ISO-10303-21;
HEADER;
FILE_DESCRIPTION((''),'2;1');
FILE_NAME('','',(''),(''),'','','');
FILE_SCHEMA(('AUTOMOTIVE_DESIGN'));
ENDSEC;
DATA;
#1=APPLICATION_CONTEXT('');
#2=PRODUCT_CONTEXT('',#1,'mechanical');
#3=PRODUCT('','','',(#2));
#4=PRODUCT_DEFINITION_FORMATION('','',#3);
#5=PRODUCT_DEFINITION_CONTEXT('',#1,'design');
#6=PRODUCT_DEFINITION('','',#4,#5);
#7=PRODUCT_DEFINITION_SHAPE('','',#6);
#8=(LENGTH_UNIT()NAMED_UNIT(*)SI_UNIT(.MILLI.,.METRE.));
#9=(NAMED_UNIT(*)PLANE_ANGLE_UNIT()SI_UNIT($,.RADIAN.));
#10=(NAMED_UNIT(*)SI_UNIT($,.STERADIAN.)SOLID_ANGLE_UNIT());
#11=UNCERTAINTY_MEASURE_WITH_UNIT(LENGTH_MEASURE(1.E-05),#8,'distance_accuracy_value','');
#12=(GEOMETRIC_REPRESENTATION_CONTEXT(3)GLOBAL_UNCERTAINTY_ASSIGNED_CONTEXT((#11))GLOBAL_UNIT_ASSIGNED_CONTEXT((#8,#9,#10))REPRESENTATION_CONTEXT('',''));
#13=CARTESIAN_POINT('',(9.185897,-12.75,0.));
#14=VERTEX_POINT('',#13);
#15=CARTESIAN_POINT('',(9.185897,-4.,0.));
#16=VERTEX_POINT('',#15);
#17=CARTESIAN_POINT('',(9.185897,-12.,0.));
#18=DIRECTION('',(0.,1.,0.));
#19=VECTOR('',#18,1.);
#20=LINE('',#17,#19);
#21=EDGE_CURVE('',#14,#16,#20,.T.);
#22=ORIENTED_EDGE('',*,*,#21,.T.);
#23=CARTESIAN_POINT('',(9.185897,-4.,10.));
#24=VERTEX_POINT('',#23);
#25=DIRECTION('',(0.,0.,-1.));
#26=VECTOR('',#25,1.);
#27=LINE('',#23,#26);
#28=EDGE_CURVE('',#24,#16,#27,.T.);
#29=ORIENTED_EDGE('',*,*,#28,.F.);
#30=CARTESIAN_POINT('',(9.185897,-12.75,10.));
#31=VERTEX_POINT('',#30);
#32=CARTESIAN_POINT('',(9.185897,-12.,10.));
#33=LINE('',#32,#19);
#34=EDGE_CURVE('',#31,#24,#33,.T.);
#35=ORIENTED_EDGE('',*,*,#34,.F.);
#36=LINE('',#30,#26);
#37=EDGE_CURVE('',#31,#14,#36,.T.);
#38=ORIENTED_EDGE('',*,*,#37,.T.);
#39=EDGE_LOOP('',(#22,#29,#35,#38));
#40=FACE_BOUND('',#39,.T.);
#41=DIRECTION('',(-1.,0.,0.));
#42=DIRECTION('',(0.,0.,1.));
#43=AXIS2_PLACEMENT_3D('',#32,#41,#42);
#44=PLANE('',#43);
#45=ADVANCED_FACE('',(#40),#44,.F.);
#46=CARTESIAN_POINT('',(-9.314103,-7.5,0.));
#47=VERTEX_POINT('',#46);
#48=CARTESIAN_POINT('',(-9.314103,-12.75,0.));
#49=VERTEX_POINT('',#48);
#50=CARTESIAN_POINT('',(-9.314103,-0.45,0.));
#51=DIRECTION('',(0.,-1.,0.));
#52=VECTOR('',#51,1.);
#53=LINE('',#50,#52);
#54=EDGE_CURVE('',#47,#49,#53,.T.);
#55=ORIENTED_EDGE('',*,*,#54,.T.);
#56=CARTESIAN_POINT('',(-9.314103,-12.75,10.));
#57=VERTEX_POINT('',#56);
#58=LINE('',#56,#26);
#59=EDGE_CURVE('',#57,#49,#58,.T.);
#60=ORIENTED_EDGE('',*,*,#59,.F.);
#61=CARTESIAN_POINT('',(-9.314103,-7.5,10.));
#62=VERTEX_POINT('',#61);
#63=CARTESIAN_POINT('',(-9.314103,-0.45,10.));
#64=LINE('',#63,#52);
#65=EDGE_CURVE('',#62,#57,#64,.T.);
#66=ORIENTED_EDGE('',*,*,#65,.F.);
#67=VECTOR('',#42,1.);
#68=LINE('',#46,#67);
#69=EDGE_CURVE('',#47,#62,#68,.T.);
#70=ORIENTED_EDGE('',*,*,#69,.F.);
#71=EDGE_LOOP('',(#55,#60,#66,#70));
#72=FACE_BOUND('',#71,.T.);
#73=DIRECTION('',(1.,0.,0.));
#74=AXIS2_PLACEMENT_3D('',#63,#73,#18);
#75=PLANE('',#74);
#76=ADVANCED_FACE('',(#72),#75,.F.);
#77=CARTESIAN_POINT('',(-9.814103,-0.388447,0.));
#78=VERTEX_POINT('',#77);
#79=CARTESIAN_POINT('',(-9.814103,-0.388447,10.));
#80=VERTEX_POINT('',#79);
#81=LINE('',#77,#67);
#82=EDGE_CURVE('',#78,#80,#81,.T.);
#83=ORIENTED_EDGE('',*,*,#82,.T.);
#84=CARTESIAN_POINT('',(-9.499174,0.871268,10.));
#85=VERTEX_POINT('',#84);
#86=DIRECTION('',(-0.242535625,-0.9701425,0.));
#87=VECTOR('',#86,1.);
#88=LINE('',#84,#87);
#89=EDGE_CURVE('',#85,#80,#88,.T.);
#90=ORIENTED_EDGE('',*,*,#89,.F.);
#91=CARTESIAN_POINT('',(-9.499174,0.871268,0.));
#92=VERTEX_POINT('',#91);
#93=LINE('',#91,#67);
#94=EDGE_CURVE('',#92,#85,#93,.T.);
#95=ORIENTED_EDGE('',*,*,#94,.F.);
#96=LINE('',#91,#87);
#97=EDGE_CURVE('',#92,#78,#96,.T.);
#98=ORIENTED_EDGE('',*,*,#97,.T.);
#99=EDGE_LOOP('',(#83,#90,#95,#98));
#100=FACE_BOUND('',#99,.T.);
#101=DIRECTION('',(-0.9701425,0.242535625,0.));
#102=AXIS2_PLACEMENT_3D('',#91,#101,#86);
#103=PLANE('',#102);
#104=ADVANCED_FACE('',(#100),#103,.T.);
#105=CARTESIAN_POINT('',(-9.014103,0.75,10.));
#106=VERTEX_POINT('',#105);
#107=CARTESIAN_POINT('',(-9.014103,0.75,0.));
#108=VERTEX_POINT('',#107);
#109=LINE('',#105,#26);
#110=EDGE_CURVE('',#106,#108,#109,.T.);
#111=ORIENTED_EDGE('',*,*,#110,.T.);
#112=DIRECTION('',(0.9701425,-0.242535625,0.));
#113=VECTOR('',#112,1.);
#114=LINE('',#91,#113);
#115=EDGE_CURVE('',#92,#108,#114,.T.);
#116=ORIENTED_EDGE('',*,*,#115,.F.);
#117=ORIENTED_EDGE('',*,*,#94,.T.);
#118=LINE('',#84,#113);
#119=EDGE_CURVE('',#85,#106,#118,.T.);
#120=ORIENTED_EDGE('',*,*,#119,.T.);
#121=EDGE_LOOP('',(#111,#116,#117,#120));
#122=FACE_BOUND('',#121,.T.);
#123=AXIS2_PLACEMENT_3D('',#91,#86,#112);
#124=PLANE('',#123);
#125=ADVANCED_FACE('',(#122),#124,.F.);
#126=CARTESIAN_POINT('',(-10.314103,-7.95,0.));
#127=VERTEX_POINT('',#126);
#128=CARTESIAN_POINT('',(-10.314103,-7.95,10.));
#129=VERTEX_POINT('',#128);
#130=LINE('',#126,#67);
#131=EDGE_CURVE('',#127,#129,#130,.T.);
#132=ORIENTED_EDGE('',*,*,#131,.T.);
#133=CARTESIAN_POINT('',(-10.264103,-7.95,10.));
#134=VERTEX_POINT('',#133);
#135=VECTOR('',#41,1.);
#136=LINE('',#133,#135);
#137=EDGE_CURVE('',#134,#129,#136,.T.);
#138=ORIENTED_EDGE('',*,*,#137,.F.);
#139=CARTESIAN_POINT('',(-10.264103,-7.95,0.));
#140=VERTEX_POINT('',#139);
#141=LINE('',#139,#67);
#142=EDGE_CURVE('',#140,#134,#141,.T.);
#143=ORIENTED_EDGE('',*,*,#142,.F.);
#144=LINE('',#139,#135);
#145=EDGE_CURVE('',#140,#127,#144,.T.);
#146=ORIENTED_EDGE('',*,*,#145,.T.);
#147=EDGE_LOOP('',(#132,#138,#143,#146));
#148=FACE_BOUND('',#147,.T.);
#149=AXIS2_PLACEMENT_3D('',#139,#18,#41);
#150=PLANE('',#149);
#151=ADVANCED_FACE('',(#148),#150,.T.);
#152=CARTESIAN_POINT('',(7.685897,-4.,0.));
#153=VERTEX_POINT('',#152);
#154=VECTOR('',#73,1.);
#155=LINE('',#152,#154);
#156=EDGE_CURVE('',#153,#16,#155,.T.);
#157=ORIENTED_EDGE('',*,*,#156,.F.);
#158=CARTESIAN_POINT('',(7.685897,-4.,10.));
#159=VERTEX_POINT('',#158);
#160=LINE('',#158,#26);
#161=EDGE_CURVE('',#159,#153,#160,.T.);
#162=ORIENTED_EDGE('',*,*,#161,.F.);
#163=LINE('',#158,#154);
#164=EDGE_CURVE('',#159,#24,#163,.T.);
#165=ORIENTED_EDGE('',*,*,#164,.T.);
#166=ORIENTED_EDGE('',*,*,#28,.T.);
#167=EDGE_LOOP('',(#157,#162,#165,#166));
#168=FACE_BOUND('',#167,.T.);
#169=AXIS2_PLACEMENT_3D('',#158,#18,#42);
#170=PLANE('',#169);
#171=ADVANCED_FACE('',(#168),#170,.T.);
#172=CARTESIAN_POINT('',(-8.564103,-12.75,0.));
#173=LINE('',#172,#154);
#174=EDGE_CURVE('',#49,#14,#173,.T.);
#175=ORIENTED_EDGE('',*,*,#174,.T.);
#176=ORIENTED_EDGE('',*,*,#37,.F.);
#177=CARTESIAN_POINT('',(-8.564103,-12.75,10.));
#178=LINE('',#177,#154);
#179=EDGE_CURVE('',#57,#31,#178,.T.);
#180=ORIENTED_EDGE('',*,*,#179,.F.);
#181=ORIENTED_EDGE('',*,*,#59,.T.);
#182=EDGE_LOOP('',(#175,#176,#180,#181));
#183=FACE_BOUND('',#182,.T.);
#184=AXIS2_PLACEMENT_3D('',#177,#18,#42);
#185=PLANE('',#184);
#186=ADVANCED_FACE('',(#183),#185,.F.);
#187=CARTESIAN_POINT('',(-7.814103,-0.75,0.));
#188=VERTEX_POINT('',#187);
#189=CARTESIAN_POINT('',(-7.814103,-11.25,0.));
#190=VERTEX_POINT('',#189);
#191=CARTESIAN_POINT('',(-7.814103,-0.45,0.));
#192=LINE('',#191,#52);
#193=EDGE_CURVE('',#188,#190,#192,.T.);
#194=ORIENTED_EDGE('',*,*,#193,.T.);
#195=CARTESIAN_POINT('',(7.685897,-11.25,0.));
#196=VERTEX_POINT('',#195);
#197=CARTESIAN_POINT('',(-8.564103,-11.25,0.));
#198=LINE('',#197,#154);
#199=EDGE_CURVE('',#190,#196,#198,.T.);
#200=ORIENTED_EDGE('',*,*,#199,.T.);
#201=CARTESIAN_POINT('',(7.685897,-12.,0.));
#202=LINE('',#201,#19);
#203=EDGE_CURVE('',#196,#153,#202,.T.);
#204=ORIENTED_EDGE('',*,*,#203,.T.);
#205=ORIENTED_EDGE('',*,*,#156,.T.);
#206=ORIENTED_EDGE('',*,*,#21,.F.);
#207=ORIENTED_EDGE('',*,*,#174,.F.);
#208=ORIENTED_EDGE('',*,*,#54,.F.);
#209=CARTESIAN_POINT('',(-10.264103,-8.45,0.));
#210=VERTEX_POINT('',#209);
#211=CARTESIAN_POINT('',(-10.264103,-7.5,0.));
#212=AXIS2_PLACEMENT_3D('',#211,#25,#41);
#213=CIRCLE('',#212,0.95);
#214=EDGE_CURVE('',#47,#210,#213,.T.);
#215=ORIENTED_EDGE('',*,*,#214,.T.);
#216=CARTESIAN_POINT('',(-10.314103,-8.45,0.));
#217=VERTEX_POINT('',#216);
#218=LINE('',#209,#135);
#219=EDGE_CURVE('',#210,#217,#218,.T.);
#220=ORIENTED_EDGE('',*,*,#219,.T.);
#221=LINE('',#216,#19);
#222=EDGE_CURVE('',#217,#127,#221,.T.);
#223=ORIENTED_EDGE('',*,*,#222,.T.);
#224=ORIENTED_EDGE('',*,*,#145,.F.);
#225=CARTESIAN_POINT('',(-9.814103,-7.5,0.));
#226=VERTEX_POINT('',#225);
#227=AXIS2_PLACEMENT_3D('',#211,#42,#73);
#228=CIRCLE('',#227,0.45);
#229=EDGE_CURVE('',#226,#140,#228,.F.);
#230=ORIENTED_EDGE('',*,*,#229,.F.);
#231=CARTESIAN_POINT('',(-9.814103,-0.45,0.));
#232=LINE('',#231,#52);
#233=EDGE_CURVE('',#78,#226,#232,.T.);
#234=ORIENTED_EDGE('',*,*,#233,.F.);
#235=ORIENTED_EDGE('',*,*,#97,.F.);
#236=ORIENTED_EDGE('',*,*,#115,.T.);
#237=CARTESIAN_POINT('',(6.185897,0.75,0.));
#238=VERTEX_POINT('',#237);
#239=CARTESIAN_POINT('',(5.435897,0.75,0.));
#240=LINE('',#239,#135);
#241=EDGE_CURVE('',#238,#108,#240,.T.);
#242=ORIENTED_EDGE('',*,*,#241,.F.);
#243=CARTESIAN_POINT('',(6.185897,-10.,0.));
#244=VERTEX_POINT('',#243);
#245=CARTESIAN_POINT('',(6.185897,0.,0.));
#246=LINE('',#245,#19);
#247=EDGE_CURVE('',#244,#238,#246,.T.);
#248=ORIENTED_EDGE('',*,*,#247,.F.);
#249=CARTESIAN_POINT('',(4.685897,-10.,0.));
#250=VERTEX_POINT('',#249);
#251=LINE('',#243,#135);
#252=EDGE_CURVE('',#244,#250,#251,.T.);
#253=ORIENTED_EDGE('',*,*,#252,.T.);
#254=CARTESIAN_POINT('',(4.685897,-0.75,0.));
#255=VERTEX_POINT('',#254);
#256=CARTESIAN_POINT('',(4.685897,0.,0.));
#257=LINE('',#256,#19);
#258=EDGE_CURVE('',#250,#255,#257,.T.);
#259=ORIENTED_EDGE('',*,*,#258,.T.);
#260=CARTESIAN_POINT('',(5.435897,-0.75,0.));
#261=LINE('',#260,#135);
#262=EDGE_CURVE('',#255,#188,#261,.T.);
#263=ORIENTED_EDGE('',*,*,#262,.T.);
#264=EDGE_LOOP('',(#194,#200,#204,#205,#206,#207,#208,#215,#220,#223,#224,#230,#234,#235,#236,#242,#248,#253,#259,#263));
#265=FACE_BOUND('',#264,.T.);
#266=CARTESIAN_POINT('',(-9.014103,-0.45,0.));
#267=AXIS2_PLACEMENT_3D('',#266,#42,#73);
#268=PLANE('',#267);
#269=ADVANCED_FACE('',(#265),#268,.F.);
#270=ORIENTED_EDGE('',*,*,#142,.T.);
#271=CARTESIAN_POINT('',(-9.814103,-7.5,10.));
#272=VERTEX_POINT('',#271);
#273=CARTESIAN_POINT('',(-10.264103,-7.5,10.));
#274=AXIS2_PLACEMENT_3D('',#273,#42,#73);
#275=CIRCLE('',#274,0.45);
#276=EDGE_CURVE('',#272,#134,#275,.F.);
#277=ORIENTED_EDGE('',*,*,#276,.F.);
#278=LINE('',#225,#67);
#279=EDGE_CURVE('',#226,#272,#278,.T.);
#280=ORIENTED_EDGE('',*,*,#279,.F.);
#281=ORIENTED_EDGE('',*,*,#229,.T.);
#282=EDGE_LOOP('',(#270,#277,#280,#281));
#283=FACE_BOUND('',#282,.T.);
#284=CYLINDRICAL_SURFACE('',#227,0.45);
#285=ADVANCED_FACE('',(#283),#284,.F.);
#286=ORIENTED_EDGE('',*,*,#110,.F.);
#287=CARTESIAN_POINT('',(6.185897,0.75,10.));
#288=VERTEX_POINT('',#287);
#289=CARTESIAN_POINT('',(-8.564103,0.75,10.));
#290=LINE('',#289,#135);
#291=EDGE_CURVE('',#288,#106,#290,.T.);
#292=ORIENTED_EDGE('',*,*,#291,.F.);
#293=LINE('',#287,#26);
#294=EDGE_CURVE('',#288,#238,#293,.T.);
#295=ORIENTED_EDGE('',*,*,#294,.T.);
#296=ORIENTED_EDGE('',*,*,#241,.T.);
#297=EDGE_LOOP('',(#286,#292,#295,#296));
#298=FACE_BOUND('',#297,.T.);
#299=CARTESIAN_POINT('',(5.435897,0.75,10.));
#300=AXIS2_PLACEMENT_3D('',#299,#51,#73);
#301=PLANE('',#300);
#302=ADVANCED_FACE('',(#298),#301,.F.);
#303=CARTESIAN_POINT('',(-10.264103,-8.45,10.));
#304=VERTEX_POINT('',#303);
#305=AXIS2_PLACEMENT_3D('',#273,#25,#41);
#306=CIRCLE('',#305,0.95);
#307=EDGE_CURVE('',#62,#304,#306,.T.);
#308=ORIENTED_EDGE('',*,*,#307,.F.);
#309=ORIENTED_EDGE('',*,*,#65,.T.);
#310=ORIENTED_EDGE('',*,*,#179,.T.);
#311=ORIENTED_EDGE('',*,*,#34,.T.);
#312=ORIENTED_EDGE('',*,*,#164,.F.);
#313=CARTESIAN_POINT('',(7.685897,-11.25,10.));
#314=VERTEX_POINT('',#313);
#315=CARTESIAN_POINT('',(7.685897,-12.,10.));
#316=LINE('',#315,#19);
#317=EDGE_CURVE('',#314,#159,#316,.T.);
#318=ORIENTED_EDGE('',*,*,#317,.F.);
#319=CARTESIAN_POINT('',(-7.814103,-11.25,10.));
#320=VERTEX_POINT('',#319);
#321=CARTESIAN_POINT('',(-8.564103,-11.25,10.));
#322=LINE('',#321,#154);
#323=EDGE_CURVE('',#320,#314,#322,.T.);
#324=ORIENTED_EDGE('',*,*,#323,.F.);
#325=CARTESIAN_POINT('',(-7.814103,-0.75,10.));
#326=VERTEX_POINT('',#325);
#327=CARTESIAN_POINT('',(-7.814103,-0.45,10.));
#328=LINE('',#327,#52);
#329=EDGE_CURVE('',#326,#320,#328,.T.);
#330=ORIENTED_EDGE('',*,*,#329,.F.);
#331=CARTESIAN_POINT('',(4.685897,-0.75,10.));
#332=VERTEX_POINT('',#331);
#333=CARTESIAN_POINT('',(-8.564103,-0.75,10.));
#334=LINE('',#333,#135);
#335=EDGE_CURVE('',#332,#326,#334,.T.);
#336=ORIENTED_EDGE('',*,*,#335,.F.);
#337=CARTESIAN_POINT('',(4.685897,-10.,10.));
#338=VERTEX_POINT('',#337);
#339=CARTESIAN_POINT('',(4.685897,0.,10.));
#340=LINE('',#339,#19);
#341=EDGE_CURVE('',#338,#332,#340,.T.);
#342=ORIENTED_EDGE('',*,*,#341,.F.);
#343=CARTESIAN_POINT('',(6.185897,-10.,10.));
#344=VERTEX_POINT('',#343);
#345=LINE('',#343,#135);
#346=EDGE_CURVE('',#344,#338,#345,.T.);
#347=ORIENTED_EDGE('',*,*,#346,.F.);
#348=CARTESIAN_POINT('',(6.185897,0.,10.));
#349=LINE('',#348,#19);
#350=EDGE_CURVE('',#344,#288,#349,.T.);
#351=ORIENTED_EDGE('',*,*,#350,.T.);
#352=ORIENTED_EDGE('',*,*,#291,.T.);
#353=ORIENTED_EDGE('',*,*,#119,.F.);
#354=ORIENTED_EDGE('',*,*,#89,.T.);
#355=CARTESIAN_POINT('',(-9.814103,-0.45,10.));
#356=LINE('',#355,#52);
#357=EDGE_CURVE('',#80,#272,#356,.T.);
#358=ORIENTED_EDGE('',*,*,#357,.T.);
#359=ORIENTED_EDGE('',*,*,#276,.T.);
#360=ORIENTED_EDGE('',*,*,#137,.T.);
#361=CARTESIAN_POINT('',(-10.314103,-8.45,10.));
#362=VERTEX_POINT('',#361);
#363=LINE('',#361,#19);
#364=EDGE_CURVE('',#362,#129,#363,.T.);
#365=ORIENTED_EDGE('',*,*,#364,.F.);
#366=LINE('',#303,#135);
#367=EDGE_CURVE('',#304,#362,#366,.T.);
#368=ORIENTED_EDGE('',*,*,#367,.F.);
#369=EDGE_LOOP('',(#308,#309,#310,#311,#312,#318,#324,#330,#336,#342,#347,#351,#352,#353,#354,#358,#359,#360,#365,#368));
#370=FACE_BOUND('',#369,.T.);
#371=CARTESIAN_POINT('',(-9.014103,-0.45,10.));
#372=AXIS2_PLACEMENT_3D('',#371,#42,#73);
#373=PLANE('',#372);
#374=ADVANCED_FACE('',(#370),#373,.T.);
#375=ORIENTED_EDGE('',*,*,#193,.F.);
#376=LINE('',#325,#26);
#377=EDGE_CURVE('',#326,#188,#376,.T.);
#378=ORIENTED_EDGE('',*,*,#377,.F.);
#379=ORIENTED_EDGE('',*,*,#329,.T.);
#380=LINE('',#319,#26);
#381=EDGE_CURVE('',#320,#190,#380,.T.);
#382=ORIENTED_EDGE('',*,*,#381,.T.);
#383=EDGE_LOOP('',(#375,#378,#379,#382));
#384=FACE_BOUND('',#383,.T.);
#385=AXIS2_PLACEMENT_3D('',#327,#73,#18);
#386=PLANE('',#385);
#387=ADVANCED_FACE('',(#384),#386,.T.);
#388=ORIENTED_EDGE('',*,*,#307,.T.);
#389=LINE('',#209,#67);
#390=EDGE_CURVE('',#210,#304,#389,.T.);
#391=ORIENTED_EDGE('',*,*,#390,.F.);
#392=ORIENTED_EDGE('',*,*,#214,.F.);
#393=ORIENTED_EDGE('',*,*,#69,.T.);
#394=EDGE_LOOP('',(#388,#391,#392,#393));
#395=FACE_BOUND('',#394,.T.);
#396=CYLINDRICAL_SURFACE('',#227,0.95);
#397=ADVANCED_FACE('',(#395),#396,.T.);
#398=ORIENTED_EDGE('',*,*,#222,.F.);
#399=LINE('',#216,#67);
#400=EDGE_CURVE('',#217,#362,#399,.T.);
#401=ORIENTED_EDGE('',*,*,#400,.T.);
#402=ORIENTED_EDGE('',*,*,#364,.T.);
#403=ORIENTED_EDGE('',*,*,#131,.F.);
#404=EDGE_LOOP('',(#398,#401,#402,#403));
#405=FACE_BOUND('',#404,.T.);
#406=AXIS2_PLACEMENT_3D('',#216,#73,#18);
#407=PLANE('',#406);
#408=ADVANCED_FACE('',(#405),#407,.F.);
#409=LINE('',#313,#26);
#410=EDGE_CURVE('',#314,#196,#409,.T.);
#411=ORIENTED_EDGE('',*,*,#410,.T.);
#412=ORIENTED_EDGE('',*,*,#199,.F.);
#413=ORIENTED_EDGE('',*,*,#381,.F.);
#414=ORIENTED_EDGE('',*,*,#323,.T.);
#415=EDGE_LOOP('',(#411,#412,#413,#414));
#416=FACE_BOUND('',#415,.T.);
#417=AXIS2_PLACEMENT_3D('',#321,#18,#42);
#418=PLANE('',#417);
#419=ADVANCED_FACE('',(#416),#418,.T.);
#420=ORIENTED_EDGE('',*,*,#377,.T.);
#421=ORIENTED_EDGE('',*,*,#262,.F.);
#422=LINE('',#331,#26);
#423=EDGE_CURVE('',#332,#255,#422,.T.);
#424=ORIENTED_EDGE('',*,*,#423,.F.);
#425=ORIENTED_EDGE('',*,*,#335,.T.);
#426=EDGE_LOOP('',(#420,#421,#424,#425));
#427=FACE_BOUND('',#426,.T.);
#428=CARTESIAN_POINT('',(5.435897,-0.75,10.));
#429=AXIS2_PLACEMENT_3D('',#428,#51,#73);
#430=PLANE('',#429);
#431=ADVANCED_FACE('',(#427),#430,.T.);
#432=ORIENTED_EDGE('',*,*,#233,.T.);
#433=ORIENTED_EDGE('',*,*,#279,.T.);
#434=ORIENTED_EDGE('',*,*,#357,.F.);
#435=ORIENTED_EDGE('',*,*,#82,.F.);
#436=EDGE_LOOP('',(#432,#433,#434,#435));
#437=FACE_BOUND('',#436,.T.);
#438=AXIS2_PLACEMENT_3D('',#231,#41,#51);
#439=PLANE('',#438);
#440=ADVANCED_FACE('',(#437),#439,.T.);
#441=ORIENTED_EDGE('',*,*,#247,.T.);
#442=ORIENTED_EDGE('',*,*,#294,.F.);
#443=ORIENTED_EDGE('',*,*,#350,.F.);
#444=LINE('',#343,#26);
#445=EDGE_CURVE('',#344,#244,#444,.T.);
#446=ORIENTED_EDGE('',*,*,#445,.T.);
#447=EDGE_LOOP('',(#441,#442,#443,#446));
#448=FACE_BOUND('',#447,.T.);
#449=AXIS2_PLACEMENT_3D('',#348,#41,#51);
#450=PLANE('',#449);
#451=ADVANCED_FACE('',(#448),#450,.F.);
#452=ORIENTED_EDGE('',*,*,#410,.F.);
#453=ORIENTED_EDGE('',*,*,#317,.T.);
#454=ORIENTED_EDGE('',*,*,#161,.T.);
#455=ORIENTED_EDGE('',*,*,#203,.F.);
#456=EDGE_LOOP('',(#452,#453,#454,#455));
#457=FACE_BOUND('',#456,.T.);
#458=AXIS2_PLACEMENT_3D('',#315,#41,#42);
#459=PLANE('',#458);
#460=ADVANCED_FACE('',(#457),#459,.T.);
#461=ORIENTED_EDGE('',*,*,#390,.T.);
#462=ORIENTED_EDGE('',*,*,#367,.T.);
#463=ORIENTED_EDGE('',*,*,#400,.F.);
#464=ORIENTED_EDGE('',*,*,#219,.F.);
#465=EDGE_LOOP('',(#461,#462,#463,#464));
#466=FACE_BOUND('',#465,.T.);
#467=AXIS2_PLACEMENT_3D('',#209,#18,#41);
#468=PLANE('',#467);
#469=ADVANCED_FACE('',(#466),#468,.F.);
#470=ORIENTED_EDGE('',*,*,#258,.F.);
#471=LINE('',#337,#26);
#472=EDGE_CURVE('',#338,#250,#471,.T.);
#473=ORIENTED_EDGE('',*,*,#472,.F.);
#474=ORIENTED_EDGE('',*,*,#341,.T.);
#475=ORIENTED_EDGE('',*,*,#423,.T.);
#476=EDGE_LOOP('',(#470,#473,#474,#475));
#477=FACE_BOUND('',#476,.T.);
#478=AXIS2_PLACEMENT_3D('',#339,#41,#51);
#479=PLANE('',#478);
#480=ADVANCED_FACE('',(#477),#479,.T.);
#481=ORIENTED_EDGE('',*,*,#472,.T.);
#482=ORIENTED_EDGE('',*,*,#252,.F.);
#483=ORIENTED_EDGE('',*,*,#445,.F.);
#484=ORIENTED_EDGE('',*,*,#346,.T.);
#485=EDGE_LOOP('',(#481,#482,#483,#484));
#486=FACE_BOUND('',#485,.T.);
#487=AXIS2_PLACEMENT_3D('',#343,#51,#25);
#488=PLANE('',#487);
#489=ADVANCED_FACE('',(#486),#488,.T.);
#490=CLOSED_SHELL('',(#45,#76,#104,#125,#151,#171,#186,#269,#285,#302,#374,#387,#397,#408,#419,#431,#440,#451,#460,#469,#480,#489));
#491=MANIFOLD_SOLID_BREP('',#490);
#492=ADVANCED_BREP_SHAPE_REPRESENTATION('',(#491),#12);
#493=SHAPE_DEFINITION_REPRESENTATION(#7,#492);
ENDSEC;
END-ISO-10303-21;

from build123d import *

# Parameters (mm, degrees)
EXTRUDE_THIN1_DEPTH = 10
EXTRUDE_THIN2_DEPTH = 10


# Read off the part's stored shape, not the designer's step: Extrude-Thin1
with BuildPart() as part:
    # Extrude-Thin1 outline → Extrude-Thin1 (new body)
    with BuildSketch(Plane.XY):
        Polygon((-9.314102564, -0.45), (-9.314102564, -12.75), (9.185897436, -12.75), (9.185897436, -4), (7.685897436, -4), (7.685897436, -11.25), (-7.814102564, -11.25), (-7.814102564, -0.75), (4.685897436, -0.75), (4.685897436, -10), (6.185897436, -10), (6.185897436, 0.75), (-9.014102564, 0.75), align=None)
    extrude(amount=EXTRUDE_THIN1_DEPTH)

    # Sketch2 → Extrude-Thin2 (add)
    with BuildSketch(Plane.XY.offset(10)):
        with BuildLine():
            Line((-9.014102564, 0.75), (-9.314102564, -0.45))
            Line((-9.314102564, -0.45), (-9.314102564, -7.5))
            ThreePointArc((-9.314102564, -7.5), (-9.592351122, -8.171751442), (-10.264102564, -8.45))
            Line((-10.264102564, -8.45), (-10.314102564, -8.45))
            Line((-10.314102564, -8.45), (-10.314102564, -7.95))
            Line((-10.314102564, -7.95), (-10.264102564, -7.95))
            ThreePointArc((-10.264102564, -7.95), (-9.945904513, -7.818198052), (-9.814102564, -7.5))
            Line((-9.814102564, -7.5), (-9.814102564, -0.388447187))
            Line((-9.814102564, -0.388447187), (-9.499173814, 0.871267813))
            Line((-9.499173814, 0.871267813), (-9.014102564, 0.75))
        make_face()
    extrude(amount=-EXTRUDE_THIN2_DEPTH)


solid = part.part
